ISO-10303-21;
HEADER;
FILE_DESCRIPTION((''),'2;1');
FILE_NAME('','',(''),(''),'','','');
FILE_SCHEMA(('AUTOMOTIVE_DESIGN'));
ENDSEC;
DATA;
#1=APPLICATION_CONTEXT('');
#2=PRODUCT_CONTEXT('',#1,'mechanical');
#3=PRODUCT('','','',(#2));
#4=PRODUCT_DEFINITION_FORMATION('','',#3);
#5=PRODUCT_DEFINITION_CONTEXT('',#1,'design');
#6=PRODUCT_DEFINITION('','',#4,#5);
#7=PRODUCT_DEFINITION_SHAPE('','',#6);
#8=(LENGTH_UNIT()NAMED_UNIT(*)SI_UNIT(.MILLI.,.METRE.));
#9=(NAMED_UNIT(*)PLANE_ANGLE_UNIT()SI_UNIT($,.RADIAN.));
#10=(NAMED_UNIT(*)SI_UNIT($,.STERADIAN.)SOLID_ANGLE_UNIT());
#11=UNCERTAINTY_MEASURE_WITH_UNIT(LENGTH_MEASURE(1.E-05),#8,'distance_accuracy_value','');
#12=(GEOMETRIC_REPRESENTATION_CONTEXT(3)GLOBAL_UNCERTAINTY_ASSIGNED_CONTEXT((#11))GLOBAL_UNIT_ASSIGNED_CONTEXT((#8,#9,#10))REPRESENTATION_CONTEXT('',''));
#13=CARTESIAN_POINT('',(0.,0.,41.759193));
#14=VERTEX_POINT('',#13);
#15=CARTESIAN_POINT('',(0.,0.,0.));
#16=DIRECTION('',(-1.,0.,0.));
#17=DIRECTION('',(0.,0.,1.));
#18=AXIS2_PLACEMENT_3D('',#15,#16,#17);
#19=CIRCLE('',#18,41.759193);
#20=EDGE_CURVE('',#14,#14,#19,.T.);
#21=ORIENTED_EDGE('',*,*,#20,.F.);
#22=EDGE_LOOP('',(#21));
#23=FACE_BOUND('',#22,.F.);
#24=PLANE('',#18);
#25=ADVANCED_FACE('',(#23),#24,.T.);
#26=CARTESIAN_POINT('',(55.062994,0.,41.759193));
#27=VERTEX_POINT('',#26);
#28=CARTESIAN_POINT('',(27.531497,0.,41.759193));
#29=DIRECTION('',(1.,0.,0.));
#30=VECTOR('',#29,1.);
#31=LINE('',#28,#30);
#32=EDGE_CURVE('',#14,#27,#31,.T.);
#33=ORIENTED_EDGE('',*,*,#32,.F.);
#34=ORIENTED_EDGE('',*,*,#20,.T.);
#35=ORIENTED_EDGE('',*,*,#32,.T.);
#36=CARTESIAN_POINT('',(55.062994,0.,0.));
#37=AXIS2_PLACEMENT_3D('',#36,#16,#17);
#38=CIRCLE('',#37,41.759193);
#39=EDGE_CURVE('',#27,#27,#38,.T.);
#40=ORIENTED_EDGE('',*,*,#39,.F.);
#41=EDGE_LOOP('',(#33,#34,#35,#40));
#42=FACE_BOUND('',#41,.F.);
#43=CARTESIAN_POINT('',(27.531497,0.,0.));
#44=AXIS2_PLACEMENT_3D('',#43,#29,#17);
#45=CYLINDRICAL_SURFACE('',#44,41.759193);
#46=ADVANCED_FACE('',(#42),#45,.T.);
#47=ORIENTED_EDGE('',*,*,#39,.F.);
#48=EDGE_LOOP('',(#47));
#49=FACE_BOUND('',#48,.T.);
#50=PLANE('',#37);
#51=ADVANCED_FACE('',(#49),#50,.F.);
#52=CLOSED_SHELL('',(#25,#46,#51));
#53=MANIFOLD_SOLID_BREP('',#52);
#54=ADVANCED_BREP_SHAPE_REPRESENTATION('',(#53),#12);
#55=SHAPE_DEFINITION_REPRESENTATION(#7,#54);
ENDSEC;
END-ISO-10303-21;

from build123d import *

# Parameters (mm, degrees)
F0_W = 55.0629943609
F0_H = 41.7591929436


# Not quite as in the source:
# - the program builds the solid bodies; features that only make, move or delete a surface that nothing else refers to are left out


with BuildPart() as f2:
    # F0 (on Front) → F2 (revolve)
    with BuildSketch(Plane.XZ):
        with Locations((27.5314971805, 20.8795964718)):
            Rectangle(F0_W, F0_H)
    revolve(axis=Axis((27.5314971805, 0, 0), (-1, 0, 0)))


solid = f2.part
